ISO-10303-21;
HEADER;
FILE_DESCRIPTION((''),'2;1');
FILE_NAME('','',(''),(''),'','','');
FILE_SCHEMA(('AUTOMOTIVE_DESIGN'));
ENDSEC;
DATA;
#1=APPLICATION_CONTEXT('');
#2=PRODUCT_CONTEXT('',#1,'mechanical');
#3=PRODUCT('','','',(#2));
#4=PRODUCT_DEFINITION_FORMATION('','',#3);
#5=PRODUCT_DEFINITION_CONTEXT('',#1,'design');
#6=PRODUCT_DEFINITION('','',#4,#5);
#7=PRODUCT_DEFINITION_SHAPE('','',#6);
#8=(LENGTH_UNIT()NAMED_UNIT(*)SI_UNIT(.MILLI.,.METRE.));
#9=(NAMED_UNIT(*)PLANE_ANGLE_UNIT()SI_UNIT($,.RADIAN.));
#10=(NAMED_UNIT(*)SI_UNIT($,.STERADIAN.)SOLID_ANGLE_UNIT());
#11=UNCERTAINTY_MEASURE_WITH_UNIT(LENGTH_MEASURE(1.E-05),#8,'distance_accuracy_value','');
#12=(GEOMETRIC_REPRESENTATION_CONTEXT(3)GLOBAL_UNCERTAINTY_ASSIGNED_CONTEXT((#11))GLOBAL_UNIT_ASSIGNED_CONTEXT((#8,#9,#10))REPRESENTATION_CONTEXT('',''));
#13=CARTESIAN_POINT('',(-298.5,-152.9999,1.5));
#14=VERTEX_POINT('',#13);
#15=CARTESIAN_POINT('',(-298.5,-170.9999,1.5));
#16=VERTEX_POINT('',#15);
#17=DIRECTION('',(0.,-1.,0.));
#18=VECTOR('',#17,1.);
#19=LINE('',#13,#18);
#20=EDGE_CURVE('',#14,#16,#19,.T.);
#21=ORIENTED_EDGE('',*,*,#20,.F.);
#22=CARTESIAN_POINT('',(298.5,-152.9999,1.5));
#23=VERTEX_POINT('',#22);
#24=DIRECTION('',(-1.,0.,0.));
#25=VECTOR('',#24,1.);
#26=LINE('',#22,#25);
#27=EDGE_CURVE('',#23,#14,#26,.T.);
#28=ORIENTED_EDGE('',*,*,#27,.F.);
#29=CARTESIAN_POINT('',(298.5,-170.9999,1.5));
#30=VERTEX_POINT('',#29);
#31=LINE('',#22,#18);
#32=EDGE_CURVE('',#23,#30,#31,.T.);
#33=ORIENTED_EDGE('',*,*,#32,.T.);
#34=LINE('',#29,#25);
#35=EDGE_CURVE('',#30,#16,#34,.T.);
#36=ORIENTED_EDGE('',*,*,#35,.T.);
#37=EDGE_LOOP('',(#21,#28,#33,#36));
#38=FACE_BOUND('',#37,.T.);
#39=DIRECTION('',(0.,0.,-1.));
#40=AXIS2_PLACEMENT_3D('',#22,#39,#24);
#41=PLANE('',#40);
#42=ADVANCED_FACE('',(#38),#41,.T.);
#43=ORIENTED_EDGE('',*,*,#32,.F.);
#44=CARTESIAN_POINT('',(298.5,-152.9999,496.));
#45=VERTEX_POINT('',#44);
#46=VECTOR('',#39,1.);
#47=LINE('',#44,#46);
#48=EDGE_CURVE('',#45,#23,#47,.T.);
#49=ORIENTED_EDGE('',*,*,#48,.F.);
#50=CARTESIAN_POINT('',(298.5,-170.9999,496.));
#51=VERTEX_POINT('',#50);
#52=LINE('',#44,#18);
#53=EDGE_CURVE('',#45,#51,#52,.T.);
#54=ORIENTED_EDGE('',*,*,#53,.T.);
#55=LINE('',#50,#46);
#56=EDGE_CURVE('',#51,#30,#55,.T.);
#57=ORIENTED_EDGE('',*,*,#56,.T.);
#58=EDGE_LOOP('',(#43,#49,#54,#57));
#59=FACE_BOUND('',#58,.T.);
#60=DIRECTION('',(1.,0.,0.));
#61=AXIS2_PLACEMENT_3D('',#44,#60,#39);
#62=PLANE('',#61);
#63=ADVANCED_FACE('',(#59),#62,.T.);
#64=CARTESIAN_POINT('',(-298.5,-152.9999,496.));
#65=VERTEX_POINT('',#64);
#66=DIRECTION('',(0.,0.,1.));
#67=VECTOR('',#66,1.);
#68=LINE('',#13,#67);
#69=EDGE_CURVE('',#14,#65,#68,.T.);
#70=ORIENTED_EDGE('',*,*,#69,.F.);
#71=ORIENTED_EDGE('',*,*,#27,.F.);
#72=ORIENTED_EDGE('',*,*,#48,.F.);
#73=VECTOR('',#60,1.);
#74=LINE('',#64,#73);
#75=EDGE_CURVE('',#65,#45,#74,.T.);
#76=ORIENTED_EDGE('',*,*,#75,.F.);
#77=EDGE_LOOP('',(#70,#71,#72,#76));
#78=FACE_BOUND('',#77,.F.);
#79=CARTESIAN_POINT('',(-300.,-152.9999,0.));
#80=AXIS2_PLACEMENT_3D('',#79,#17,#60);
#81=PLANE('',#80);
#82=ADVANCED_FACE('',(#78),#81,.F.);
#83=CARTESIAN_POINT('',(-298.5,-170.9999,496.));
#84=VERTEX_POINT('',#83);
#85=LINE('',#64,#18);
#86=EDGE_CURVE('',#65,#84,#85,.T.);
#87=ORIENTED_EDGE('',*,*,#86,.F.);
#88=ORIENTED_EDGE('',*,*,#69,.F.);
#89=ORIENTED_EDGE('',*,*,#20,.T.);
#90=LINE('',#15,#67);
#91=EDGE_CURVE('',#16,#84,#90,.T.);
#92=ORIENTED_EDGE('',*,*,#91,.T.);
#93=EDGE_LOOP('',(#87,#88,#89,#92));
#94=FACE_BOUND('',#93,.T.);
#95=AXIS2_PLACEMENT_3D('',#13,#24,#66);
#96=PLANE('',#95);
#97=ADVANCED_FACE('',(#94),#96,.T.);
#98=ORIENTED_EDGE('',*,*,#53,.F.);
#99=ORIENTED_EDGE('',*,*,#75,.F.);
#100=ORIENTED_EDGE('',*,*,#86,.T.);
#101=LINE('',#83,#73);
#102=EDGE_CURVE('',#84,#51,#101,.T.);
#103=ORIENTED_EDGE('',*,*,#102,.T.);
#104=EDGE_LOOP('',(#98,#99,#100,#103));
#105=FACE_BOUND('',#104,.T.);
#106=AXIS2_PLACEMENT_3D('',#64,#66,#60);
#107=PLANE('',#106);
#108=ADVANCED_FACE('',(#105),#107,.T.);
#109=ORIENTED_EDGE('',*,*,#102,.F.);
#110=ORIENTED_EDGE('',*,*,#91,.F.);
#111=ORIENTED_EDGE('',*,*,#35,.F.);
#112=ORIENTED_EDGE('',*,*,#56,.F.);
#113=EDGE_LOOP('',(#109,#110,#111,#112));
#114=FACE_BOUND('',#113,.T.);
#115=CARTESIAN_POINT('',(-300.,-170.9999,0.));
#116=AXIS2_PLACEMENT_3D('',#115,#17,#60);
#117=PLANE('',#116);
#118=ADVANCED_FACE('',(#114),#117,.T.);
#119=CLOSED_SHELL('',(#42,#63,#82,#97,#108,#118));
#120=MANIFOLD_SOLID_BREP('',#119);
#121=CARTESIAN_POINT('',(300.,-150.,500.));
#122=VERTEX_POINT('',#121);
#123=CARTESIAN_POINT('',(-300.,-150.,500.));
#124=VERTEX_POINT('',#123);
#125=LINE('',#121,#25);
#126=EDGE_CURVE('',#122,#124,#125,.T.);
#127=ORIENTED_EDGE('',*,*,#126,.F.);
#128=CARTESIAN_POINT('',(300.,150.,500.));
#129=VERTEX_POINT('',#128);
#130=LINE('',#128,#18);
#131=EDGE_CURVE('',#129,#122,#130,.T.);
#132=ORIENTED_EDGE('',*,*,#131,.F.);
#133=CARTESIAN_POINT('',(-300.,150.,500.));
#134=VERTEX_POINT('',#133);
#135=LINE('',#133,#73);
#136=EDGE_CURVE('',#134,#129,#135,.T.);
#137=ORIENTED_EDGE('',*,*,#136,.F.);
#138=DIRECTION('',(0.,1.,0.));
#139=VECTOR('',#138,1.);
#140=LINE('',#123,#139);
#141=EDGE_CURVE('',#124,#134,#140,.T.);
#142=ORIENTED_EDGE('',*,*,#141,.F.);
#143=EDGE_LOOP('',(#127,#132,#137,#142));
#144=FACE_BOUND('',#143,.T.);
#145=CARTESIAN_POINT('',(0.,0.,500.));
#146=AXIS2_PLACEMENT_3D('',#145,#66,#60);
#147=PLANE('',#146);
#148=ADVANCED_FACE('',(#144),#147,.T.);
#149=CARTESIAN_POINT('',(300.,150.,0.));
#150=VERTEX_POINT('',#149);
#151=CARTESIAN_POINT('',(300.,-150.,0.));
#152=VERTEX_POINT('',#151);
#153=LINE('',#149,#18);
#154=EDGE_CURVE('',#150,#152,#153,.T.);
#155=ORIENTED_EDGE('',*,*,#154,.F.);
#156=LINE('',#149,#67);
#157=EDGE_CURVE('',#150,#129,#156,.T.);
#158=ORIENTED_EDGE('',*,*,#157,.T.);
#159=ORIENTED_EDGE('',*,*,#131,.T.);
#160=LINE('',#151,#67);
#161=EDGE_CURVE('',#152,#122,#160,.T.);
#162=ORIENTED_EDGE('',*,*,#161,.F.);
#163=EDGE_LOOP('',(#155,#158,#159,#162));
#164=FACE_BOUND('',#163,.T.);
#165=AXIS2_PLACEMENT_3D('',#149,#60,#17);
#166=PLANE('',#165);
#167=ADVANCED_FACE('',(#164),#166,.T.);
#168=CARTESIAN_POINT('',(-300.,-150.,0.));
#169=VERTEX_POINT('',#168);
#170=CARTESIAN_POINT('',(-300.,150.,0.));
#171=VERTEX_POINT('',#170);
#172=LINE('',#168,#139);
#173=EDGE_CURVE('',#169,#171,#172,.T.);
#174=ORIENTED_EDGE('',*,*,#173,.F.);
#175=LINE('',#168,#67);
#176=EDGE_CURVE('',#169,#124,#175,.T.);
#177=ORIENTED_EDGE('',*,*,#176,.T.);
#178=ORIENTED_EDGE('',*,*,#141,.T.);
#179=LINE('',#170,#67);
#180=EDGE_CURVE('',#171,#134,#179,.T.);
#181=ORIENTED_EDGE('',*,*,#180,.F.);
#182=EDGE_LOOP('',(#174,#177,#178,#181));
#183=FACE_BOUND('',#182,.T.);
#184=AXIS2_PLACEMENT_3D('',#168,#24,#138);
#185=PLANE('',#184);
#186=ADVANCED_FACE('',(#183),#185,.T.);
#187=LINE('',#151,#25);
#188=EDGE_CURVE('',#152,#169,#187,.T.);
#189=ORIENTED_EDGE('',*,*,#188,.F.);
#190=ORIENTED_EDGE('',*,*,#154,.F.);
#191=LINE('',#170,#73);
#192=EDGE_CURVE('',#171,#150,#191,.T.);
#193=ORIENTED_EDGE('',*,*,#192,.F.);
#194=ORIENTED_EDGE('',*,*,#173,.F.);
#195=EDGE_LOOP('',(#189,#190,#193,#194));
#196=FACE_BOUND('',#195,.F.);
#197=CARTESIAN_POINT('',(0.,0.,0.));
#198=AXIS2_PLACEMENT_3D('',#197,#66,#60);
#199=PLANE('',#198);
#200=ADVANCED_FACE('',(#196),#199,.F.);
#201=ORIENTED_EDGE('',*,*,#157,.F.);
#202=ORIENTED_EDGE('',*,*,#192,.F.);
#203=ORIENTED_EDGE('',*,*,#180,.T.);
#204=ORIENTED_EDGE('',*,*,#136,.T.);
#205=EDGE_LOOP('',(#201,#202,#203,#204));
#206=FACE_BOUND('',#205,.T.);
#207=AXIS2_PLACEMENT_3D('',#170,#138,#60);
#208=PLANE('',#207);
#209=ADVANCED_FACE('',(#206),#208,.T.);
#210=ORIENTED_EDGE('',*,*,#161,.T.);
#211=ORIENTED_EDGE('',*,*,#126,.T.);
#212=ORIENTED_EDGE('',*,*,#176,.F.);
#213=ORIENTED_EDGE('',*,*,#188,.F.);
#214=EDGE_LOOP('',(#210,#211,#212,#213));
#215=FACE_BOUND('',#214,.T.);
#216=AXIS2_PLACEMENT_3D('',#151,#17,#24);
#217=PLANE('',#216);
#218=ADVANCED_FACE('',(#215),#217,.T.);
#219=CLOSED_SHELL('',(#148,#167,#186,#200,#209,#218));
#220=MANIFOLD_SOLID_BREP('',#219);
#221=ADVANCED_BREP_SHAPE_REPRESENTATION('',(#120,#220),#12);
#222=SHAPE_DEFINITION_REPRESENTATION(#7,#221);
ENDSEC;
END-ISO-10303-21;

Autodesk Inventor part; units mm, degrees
ref_plane "YZ Plane" through (0, 0, 0) normal (1, 0, 0) x (0, 1, 0)
ref_plane "XZ Plane" through (0, 0, 0) normal (0, 1, 0) x (-1, 0, 0)
ref_plane "XY Plane" through (0, 0, 0) normal (0, 0, 1) x (1, 0, 0)
sketch "Sketch1" plane through (0, 0, 0) normal (0, 0, 1) x (1, 0, 0)
  line L0 (-300, 150) -> (300, 150)
  line L1 (300, 150) -> (300, -150)
  line L2 (300, -150) -> (-300, -150)
  line L3 (-300, -150) -> (-300, 150)
  line L4 (-300, 150) -> (300, -150) construction
  line L5 (300, 150) -> (-300, -150) construction
  point P0 (0, 0)
  dimension "Width" = 600
  dimension "Depth" = 300
extrude "Extrusion1" add sketch "Sketch1" along normal blind 500
sketch "Sketch7" plane through (-300, -150, 0) normal (0, -1, 0) x (1, 0, 0)
  line L0 (600, 0) -> (0, 0) construction
  line L1 (600, 0) -> (600, 500) construction
  line L2 (0, 500) -> (600, 500) construction
  line L3 (0, 0) -> (0, 500) construction
  line L4 (1.5, 496) -> (598.5, 496)
  line L5 (598.5, 496) -> (598.5, 1.5)
  line L6 (598.5, 1.5) -> (1.5, 1.5)
  line L7 (1.5, 1.5) -> (1.5, 496)
  line L8 (600, 0) -> (0, 0)
  point P0 (300, 0)
  dimension "Offset_From_Top" = 4
  dimension "Offset_From_Right" = 1.5
  dimension "Offset_From_Left" = 1.5
  dimension "Offset_From_Bottom" = 1.5
extrude "Extrusion7" add sketch "Sketch7" along normal blind 18 separate body
move or copy body "Move2" bodies to move or copy 2 copy no translate (0, -3, 0)
move or copy body "Move3" bodies to move or copy 2 copy no translate (0, 0.0001, 0)
equation "\"d37\" = Panel_thickness"
equation "\"Panel_thickness\" = 18"
properties part number "Horizontaly opening Door skeleton"
